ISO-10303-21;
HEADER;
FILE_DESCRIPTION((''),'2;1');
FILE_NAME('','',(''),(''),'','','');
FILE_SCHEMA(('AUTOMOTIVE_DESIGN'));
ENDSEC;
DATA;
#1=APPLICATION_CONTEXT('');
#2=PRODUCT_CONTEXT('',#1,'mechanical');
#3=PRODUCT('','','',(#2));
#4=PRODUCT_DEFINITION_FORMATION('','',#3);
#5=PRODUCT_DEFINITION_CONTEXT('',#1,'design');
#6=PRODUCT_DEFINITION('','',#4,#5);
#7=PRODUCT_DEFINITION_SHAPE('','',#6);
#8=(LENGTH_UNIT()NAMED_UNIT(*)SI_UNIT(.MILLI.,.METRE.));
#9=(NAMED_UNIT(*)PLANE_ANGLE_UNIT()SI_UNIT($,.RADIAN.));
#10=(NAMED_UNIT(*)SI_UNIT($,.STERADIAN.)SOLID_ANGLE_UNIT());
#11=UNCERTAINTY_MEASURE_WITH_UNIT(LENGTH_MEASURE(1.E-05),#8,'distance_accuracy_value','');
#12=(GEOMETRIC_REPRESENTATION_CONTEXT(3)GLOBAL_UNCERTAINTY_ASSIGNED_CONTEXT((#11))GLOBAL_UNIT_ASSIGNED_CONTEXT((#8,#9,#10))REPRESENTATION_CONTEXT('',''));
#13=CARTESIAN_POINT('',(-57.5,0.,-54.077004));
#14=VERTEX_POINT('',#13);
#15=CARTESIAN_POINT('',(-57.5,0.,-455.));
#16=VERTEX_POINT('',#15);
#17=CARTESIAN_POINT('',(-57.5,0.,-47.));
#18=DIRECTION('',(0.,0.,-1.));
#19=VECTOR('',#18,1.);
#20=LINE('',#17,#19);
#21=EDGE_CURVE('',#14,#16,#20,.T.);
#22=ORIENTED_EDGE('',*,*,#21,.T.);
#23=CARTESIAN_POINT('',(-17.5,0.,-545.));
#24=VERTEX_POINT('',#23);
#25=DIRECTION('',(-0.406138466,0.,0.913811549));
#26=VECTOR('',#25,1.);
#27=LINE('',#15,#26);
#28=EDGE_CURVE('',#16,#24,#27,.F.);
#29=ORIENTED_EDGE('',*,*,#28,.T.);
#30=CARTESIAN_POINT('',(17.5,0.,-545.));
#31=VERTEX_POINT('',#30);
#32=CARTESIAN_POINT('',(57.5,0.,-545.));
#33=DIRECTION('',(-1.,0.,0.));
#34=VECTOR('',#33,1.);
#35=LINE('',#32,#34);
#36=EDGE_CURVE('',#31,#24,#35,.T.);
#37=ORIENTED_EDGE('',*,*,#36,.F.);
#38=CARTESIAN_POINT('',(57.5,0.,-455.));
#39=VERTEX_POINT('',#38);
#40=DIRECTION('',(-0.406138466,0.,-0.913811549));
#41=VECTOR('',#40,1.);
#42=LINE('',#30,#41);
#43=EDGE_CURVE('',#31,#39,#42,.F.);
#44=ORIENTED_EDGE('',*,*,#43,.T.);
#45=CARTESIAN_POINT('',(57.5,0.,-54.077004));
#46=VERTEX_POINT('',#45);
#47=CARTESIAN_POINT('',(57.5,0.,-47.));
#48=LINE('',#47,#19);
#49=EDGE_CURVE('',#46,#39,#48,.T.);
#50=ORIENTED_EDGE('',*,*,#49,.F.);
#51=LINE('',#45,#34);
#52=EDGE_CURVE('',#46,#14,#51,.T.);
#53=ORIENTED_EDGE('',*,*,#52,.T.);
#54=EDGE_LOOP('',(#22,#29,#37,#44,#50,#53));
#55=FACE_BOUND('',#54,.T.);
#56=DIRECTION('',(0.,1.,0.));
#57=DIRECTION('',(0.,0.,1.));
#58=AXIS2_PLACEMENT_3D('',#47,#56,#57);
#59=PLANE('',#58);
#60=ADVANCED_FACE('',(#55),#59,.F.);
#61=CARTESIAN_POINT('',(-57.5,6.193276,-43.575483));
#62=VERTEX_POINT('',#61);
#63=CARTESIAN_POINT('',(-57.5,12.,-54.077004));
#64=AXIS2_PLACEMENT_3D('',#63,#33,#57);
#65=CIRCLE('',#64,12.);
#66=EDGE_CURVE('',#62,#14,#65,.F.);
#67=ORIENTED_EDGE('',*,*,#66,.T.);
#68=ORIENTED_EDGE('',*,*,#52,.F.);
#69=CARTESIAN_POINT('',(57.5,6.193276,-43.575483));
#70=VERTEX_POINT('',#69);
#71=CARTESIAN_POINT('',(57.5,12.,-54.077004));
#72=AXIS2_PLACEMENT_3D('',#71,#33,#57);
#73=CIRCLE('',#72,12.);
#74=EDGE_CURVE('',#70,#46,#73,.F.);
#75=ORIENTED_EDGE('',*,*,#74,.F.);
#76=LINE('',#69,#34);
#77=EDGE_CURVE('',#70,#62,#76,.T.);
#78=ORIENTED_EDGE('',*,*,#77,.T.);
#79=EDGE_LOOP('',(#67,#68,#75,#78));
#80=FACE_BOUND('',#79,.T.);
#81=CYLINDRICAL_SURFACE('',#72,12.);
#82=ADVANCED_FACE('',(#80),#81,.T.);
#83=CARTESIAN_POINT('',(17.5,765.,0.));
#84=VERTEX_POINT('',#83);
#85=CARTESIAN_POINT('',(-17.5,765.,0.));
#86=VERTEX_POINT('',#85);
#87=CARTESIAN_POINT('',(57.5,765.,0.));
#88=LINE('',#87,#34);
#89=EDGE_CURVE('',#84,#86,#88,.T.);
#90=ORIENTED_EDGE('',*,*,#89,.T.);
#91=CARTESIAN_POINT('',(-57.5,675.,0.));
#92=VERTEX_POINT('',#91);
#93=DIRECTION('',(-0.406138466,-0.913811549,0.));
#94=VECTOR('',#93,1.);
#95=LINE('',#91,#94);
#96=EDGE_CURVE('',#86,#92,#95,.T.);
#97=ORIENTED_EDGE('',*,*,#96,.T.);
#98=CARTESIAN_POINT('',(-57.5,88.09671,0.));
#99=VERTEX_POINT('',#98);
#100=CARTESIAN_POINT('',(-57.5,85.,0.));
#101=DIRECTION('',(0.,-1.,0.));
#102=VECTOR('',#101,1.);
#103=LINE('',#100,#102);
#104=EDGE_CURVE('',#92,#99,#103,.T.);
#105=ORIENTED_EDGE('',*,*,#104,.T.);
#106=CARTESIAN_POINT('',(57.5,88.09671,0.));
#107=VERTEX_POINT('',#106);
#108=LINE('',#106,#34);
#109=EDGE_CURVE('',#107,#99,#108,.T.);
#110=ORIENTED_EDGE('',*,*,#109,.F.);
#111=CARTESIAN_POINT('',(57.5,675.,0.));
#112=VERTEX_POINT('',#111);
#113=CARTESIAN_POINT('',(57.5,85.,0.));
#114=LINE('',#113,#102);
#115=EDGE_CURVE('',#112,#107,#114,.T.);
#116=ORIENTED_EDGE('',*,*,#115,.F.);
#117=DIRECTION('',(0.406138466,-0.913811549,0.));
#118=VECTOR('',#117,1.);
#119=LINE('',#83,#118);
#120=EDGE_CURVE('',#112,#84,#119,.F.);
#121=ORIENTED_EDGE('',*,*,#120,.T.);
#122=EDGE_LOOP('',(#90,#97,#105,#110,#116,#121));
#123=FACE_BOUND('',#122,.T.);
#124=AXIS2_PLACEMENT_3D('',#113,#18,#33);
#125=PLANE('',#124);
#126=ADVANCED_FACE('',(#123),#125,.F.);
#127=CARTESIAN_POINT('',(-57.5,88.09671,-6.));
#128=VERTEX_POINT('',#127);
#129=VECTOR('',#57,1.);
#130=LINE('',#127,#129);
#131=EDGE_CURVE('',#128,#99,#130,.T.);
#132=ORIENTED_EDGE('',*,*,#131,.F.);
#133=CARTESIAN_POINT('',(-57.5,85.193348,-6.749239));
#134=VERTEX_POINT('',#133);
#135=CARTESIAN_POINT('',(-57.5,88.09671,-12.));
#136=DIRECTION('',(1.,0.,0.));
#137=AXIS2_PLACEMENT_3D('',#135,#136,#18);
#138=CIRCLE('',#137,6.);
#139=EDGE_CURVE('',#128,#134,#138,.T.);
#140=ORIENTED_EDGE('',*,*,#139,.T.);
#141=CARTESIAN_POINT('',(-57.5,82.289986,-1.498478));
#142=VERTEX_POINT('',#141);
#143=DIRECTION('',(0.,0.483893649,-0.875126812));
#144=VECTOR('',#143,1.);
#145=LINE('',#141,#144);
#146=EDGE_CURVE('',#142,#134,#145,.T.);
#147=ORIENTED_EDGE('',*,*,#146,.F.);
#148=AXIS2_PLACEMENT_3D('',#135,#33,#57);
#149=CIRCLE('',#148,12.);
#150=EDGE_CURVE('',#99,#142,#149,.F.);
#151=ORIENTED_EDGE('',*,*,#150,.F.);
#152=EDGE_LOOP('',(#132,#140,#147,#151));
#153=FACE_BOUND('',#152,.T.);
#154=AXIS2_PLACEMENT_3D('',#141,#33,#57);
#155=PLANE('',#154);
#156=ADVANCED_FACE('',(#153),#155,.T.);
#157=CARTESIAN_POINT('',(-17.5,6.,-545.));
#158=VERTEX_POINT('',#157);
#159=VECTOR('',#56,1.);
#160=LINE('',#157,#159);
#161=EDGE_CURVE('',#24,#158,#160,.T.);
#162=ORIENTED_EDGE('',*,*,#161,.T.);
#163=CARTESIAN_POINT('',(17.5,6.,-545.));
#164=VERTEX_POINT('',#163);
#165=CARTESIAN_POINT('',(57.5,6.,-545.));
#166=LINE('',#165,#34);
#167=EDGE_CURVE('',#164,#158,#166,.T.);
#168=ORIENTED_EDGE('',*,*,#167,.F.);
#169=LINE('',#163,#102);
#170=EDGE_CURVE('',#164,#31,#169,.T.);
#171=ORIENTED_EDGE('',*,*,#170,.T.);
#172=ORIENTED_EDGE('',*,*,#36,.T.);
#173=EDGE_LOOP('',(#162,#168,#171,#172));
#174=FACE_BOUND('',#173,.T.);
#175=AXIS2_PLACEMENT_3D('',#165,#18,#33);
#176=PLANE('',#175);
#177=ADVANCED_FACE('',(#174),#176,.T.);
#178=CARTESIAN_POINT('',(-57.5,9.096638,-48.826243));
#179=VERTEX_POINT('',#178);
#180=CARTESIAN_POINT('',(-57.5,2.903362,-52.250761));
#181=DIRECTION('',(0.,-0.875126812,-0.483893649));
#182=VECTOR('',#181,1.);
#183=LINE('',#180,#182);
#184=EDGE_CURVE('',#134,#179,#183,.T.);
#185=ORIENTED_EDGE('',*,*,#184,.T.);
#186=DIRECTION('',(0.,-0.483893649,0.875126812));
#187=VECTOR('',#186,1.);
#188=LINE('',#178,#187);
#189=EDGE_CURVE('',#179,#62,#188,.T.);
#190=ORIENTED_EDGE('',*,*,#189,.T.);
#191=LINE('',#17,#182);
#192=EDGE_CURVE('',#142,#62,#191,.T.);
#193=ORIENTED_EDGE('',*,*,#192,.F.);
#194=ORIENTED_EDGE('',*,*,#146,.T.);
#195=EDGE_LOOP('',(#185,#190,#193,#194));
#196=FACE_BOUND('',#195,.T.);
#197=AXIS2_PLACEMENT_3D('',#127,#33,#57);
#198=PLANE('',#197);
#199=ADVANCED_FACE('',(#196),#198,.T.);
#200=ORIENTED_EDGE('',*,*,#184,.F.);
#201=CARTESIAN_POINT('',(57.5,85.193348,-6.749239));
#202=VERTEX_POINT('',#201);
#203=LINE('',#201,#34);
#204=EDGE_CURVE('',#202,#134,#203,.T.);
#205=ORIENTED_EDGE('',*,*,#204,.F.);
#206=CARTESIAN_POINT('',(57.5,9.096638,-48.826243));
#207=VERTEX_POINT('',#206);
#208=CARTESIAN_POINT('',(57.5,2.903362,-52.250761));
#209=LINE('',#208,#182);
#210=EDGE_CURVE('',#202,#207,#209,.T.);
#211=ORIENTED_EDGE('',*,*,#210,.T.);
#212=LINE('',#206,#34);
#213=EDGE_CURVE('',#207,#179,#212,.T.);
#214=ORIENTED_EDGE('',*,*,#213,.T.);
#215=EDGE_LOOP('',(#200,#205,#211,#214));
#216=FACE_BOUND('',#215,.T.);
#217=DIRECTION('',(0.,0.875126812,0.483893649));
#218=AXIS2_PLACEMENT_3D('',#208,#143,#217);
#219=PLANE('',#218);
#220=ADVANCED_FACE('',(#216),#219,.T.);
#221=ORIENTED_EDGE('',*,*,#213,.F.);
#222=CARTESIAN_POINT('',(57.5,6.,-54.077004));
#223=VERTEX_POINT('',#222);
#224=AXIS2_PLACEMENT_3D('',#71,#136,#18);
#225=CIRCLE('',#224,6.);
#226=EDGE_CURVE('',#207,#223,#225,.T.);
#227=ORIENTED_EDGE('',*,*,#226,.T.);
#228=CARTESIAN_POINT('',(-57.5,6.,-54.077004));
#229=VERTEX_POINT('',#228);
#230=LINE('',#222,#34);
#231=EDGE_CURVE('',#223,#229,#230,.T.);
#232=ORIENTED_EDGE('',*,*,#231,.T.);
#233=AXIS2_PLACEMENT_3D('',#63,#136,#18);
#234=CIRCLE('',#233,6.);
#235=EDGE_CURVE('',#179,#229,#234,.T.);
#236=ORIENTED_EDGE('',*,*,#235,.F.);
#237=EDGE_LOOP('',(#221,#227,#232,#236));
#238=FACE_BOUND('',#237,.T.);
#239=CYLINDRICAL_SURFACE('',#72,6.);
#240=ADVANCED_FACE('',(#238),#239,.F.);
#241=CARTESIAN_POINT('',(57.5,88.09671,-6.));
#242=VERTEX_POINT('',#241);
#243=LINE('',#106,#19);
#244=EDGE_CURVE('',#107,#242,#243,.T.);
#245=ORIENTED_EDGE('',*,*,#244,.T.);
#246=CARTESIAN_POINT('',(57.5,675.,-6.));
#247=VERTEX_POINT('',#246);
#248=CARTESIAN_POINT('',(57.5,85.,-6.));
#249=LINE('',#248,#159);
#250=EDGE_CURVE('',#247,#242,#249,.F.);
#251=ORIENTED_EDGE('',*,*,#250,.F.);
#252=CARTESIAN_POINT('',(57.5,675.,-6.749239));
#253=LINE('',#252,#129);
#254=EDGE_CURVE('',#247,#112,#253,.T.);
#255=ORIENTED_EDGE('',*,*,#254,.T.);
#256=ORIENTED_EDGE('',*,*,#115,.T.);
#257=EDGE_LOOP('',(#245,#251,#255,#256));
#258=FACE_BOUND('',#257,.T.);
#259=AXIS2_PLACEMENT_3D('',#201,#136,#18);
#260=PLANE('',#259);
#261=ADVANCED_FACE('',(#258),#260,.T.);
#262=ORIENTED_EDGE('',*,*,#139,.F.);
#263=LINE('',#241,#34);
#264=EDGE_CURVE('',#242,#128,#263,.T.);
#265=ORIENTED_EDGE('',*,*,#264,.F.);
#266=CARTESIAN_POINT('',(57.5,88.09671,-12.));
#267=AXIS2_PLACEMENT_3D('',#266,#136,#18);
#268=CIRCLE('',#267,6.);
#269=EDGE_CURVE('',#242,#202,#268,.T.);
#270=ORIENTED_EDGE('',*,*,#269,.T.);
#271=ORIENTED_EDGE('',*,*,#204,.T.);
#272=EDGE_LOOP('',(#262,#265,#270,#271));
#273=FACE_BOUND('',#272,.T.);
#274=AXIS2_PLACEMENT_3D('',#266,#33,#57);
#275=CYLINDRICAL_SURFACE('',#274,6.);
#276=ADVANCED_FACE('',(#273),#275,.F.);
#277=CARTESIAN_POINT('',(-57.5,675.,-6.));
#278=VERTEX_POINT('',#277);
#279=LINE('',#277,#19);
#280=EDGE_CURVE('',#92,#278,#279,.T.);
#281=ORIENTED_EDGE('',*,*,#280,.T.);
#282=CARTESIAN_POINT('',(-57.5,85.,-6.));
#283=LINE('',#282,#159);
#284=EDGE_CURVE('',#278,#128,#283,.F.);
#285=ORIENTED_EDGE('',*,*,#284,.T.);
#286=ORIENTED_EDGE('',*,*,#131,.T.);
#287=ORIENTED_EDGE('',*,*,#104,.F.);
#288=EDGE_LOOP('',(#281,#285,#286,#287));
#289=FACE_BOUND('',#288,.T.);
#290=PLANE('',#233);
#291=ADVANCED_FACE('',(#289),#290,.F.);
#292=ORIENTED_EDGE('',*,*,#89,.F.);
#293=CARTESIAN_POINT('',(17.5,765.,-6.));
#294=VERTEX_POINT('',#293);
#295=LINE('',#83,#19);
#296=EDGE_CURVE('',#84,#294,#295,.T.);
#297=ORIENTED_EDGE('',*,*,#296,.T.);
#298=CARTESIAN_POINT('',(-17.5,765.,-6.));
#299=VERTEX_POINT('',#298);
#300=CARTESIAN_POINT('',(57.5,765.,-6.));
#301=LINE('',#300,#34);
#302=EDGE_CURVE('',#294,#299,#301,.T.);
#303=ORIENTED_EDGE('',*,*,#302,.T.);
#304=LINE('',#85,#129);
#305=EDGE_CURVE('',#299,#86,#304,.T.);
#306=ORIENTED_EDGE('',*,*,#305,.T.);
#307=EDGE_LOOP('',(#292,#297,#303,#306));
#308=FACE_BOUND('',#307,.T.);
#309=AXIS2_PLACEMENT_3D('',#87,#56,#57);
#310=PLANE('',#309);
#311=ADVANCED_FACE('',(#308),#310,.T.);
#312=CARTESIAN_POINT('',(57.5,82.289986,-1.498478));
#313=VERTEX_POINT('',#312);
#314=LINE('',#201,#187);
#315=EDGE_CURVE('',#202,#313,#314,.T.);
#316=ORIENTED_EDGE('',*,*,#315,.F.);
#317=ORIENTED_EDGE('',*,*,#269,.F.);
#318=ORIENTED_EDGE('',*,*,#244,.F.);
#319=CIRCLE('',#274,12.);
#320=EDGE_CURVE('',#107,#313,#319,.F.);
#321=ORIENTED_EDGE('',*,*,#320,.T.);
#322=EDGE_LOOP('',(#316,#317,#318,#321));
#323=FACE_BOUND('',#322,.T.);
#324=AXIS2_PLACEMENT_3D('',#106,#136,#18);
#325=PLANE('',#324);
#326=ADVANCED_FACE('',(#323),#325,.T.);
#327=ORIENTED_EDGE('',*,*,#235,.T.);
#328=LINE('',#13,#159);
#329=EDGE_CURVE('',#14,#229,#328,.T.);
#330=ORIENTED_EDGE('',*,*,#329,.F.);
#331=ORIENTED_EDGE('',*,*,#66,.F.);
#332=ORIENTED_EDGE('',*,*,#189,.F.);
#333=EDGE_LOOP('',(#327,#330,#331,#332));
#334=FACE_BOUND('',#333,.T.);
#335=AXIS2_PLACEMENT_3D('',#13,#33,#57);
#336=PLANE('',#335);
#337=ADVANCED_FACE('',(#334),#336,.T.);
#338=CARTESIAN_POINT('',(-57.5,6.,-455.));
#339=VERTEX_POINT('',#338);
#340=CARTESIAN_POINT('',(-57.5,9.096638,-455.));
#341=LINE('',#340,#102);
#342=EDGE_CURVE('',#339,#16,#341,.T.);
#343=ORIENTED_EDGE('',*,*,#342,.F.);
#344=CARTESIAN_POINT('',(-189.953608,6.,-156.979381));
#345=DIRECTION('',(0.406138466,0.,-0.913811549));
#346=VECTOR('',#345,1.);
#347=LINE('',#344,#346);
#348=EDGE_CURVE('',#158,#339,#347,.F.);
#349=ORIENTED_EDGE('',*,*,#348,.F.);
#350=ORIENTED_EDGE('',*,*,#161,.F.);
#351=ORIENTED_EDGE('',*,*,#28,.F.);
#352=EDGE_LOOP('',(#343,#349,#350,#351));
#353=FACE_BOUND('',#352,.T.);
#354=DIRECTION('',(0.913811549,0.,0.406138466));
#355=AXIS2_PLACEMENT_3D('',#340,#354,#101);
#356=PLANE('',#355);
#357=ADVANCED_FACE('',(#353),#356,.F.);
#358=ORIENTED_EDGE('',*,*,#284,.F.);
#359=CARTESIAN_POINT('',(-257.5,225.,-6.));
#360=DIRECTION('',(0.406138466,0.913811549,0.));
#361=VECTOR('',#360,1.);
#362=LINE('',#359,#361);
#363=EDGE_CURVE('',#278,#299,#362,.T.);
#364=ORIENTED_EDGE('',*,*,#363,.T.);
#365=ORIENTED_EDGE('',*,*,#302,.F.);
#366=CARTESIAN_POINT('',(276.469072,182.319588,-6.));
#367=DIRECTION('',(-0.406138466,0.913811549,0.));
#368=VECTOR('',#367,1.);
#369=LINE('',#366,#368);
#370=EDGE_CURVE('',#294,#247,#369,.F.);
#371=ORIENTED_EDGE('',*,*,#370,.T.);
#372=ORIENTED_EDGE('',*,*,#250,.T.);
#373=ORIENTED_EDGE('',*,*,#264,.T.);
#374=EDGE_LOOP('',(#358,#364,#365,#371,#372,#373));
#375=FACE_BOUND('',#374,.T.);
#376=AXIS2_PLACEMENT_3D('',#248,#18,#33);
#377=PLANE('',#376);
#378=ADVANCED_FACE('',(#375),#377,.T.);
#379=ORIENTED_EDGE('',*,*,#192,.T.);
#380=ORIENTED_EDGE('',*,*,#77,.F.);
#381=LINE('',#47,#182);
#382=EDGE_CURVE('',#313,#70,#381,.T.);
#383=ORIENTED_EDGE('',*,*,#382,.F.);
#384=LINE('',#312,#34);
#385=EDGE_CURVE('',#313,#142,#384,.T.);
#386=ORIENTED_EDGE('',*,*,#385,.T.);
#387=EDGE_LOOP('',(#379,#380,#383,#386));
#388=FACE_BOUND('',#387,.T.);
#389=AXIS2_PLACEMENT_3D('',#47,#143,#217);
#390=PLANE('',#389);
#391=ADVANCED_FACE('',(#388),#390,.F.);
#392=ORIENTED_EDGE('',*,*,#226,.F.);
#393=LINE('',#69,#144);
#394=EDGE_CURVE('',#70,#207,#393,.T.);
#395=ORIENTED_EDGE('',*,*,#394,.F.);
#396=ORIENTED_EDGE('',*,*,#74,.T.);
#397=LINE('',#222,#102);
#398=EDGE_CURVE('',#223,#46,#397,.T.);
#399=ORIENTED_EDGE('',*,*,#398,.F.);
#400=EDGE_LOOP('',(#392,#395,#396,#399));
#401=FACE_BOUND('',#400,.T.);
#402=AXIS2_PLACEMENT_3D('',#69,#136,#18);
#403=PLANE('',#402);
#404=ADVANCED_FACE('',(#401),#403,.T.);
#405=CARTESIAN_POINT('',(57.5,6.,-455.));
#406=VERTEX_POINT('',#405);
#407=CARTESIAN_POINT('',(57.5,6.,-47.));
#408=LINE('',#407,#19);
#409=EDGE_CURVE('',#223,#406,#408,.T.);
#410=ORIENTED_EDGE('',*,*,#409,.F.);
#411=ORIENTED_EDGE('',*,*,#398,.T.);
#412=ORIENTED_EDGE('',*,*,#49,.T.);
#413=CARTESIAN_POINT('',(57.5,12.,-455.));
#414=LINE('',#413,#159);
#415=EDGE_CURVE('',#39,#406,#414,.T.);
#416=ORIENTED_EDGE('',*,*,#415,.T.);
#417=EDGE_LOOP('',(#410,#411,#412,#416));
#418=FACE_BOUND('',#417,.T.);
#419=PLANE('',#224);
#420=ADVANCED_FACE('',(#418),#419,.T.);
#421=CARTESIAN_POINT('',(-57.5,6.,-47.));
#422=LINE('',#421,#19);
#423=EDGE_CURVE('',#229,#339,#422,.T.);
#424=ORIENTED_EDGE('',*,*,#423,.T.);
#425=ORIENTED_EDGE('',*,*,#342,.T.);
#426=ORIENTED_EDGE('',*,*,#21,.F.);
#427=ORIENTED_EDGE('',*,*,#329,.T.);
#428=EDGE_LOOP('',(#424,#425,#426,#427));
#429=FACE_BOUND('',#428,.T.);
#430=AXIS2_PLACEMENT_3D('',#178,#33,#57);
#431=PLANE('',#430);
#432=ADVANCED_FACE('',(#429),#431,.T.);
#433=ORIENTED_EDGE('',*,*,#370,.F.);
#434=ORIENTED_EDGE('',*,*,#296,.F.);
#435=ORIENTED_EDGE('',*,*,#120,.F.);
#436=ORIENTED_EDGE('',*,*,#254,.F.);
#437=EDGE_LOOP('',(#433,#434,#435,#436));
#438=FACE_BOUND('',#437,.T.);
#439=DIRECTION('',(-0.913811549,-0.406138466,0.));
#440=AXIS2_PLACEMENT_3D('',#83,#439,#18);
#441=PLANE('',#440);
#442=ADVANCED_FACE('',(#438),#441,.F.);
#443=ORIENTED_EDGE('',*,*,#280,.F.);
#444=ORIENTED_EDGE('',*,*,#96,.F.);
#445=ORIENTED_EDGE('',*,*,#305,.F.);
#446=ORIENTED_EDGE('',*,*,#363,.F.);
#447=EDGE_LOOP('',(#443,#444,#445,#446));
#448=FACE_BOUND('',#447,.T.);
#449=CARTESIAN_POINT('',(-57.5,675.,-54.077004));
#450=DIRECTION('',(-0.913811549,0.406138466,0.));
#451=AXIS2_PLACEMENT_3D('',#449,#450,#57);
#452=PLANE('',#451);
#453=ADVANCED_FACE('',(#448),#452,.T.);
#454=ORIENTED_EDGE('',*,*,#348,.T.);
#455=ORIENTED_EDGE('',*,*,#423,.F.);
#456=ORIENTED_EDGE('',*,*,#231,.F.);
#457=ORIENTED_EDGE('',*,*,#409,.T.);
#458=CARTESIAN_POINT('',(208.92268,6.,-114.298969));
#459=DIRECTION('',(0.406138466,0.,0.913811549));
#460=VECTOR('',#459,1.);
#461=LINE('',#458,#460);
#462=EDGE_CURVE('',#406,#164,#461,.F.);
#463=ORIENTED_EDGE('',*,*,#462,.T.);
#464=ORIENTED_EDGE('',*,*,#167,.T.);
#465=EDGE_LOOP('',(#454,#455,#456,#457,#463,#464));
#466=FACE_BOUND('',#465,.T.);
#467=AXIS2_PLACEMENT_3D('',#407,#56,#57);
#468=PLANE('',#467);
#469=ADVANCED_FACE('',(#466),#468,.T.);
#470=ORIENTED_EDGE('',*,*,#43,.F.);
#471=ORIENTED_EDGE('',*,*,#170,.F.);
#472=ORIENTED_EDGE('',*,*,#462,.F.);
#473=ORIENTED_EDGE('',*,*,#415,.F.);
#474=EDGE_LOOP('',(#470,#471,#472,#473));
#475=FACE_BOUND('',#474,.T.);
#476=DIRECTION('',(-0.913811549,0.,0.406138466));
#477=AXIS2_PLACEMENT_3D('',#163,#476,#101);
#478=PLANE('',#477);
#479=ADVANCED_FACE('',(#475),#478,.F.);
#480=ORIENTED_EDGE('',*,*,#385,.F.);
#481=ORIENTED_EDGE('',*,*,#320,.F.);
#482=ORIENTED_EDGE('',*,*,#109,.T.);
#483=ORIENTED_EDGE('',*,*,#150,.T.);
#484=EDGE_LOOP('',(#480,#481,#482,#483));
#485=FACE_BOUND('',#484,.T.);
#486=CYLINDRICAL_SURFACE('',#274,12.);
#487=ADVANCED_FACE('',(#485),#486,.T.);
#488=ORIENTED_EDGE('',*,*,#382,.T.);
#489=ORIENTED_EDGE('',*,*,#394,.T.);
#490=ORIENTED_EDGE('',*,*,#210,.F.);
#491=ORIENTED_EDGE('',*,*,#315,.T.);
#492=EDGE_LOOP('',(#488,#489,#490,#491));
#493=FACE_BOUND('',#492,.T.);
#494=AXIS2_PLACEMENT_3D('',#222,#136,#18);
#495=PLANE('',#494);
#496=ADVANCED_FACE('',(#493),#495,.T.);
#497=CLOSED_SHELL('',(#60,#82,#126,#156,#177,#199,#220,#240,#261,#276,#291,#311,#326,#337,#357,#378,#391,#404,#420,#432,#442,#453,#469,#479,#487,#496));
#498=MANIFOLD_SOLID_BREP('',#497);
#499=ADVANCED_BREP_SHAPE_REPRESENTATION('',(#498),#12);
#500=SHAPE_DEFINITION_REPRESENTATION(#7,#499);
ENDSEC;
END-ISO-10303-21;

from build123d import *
from OCP.BRepFilletAPI import BRepFilletAPI_MakeChamfer

# Parameters (mm, degrees)
SM_BASE_FLANGE_1_DEPTH = 57.5
CHAMFER_1_SIZE         = 40
CHAMFER_1_SIZE2        = 90
CHAMFER_2_SIZE         = 90
CHAMFER_2_SIZE2        = 40


# Sheet-metal steps are written as plain solids
with BuildPart() as part:
    # Sketch 1 → 基体-法兰1 (new, symmetric)
    with BuildSketch(Plane(origin=(0, 0, 0), x_dir=(0, 0, -1), z_dir=(1, 0, 0))):
        with BuildLine():
            Line((545, 0), (54.077004305, 0))
            ThreePointArc((54.077004305, 0), (47.981132154, 1.663639774), (43.575482564, 6.193276214))
            Line((43.575482564, 6.193276214), (1.498478259, 82.289986127))
            ThreePointArc((1.498478259, 82.289986127), (0.380657056, 85.09823204), (0, 88.096709913))
            Line((0, 88.096709913), (0, 765))
            Line((0, 765), (6, 765))
            Line((6, 765), (6, 88.096709913))
            ThreePointArc((6, 88.096709913), (6.190328528, 86.597470976), (6.74923913, 85.19334802))
            Line((6.74923913, 85.19334802), (48.826243434, 9.096638107))
            ThreePointArc((48.826243434, 9.096638107), (51.029068229, 6.831819887), (54.077004305, 6))
            Line((54.077004305, 6), (545, 6))
            Line((545, 6), (545, 0))
        make_face()
    extrude(amount=SM_BASE_FLANGE_1_DEPTH, both=True)

    # 倒角1: one chamfer whose edges measure the first distance from different faces: ONE call of the kernel's chamfer builder (chamfer() names one face for all edges)
    chamfer_1_edges_1 = [part.edges().sort_by_distance(p)[0] for p in [
        (-57.5, 765, -3),
    ]]
    chamfer_1_side_1 = [part.faces().sort_by_distance(p)[0] for p in [
        (0, 765, -3),
    ]]
    chamfer_1_edges_2 = [part.edges().sort_by_distance(p)[0] for p in [
        (-57.5, 3, -545),
    ]]
    chamfer_1_side_2 = [part.faces().sort_by_distance(p)[0] for p in [
        (0, 3, -545),
    ]]
    chamfer_1 = BRepFilletAPI_MakeChamfer(part.part.solid().wrapped)
    for e in chamfer_1_edges_1:
        chamfer_1.Add(CHAMFER_1_SIZE, CHAMFER_1_SIZE2, e.wrapped, chamfer_1_side_1[0].wrapped)  # the first distance lies on this face
    for e in chamfer_1_edges_2:
        chamfer_1.Add(CHAMFER_1_SIZE, CHAMFER_1_SIZE2, e.wrapped, chamfer_1_side_2[0].wrapped)  # the first distance lies on this face
    add(Compound.cast(chamfer_1.Shape()), mode=Mode.REPLACE)

    # 倒角2
    chamfer_2_edges = [part.edges().sort_by_distance(p)[0] for p in [
        (57.5, 765, -3),
        (57.5, 3, -545),
    ]]
    chamfer_2_side = [part.faces().sort_by_distance(p)[0] for p in [
        (57.5, 6.022757105, -50.551923163),
    ]]
    chamfer(chamfer_2_edges, length=CHAMFER_2_SIZE, length2=CHAMFER_2_SIZE2, reference=chamfer_2_side[0])


solid = part.part
